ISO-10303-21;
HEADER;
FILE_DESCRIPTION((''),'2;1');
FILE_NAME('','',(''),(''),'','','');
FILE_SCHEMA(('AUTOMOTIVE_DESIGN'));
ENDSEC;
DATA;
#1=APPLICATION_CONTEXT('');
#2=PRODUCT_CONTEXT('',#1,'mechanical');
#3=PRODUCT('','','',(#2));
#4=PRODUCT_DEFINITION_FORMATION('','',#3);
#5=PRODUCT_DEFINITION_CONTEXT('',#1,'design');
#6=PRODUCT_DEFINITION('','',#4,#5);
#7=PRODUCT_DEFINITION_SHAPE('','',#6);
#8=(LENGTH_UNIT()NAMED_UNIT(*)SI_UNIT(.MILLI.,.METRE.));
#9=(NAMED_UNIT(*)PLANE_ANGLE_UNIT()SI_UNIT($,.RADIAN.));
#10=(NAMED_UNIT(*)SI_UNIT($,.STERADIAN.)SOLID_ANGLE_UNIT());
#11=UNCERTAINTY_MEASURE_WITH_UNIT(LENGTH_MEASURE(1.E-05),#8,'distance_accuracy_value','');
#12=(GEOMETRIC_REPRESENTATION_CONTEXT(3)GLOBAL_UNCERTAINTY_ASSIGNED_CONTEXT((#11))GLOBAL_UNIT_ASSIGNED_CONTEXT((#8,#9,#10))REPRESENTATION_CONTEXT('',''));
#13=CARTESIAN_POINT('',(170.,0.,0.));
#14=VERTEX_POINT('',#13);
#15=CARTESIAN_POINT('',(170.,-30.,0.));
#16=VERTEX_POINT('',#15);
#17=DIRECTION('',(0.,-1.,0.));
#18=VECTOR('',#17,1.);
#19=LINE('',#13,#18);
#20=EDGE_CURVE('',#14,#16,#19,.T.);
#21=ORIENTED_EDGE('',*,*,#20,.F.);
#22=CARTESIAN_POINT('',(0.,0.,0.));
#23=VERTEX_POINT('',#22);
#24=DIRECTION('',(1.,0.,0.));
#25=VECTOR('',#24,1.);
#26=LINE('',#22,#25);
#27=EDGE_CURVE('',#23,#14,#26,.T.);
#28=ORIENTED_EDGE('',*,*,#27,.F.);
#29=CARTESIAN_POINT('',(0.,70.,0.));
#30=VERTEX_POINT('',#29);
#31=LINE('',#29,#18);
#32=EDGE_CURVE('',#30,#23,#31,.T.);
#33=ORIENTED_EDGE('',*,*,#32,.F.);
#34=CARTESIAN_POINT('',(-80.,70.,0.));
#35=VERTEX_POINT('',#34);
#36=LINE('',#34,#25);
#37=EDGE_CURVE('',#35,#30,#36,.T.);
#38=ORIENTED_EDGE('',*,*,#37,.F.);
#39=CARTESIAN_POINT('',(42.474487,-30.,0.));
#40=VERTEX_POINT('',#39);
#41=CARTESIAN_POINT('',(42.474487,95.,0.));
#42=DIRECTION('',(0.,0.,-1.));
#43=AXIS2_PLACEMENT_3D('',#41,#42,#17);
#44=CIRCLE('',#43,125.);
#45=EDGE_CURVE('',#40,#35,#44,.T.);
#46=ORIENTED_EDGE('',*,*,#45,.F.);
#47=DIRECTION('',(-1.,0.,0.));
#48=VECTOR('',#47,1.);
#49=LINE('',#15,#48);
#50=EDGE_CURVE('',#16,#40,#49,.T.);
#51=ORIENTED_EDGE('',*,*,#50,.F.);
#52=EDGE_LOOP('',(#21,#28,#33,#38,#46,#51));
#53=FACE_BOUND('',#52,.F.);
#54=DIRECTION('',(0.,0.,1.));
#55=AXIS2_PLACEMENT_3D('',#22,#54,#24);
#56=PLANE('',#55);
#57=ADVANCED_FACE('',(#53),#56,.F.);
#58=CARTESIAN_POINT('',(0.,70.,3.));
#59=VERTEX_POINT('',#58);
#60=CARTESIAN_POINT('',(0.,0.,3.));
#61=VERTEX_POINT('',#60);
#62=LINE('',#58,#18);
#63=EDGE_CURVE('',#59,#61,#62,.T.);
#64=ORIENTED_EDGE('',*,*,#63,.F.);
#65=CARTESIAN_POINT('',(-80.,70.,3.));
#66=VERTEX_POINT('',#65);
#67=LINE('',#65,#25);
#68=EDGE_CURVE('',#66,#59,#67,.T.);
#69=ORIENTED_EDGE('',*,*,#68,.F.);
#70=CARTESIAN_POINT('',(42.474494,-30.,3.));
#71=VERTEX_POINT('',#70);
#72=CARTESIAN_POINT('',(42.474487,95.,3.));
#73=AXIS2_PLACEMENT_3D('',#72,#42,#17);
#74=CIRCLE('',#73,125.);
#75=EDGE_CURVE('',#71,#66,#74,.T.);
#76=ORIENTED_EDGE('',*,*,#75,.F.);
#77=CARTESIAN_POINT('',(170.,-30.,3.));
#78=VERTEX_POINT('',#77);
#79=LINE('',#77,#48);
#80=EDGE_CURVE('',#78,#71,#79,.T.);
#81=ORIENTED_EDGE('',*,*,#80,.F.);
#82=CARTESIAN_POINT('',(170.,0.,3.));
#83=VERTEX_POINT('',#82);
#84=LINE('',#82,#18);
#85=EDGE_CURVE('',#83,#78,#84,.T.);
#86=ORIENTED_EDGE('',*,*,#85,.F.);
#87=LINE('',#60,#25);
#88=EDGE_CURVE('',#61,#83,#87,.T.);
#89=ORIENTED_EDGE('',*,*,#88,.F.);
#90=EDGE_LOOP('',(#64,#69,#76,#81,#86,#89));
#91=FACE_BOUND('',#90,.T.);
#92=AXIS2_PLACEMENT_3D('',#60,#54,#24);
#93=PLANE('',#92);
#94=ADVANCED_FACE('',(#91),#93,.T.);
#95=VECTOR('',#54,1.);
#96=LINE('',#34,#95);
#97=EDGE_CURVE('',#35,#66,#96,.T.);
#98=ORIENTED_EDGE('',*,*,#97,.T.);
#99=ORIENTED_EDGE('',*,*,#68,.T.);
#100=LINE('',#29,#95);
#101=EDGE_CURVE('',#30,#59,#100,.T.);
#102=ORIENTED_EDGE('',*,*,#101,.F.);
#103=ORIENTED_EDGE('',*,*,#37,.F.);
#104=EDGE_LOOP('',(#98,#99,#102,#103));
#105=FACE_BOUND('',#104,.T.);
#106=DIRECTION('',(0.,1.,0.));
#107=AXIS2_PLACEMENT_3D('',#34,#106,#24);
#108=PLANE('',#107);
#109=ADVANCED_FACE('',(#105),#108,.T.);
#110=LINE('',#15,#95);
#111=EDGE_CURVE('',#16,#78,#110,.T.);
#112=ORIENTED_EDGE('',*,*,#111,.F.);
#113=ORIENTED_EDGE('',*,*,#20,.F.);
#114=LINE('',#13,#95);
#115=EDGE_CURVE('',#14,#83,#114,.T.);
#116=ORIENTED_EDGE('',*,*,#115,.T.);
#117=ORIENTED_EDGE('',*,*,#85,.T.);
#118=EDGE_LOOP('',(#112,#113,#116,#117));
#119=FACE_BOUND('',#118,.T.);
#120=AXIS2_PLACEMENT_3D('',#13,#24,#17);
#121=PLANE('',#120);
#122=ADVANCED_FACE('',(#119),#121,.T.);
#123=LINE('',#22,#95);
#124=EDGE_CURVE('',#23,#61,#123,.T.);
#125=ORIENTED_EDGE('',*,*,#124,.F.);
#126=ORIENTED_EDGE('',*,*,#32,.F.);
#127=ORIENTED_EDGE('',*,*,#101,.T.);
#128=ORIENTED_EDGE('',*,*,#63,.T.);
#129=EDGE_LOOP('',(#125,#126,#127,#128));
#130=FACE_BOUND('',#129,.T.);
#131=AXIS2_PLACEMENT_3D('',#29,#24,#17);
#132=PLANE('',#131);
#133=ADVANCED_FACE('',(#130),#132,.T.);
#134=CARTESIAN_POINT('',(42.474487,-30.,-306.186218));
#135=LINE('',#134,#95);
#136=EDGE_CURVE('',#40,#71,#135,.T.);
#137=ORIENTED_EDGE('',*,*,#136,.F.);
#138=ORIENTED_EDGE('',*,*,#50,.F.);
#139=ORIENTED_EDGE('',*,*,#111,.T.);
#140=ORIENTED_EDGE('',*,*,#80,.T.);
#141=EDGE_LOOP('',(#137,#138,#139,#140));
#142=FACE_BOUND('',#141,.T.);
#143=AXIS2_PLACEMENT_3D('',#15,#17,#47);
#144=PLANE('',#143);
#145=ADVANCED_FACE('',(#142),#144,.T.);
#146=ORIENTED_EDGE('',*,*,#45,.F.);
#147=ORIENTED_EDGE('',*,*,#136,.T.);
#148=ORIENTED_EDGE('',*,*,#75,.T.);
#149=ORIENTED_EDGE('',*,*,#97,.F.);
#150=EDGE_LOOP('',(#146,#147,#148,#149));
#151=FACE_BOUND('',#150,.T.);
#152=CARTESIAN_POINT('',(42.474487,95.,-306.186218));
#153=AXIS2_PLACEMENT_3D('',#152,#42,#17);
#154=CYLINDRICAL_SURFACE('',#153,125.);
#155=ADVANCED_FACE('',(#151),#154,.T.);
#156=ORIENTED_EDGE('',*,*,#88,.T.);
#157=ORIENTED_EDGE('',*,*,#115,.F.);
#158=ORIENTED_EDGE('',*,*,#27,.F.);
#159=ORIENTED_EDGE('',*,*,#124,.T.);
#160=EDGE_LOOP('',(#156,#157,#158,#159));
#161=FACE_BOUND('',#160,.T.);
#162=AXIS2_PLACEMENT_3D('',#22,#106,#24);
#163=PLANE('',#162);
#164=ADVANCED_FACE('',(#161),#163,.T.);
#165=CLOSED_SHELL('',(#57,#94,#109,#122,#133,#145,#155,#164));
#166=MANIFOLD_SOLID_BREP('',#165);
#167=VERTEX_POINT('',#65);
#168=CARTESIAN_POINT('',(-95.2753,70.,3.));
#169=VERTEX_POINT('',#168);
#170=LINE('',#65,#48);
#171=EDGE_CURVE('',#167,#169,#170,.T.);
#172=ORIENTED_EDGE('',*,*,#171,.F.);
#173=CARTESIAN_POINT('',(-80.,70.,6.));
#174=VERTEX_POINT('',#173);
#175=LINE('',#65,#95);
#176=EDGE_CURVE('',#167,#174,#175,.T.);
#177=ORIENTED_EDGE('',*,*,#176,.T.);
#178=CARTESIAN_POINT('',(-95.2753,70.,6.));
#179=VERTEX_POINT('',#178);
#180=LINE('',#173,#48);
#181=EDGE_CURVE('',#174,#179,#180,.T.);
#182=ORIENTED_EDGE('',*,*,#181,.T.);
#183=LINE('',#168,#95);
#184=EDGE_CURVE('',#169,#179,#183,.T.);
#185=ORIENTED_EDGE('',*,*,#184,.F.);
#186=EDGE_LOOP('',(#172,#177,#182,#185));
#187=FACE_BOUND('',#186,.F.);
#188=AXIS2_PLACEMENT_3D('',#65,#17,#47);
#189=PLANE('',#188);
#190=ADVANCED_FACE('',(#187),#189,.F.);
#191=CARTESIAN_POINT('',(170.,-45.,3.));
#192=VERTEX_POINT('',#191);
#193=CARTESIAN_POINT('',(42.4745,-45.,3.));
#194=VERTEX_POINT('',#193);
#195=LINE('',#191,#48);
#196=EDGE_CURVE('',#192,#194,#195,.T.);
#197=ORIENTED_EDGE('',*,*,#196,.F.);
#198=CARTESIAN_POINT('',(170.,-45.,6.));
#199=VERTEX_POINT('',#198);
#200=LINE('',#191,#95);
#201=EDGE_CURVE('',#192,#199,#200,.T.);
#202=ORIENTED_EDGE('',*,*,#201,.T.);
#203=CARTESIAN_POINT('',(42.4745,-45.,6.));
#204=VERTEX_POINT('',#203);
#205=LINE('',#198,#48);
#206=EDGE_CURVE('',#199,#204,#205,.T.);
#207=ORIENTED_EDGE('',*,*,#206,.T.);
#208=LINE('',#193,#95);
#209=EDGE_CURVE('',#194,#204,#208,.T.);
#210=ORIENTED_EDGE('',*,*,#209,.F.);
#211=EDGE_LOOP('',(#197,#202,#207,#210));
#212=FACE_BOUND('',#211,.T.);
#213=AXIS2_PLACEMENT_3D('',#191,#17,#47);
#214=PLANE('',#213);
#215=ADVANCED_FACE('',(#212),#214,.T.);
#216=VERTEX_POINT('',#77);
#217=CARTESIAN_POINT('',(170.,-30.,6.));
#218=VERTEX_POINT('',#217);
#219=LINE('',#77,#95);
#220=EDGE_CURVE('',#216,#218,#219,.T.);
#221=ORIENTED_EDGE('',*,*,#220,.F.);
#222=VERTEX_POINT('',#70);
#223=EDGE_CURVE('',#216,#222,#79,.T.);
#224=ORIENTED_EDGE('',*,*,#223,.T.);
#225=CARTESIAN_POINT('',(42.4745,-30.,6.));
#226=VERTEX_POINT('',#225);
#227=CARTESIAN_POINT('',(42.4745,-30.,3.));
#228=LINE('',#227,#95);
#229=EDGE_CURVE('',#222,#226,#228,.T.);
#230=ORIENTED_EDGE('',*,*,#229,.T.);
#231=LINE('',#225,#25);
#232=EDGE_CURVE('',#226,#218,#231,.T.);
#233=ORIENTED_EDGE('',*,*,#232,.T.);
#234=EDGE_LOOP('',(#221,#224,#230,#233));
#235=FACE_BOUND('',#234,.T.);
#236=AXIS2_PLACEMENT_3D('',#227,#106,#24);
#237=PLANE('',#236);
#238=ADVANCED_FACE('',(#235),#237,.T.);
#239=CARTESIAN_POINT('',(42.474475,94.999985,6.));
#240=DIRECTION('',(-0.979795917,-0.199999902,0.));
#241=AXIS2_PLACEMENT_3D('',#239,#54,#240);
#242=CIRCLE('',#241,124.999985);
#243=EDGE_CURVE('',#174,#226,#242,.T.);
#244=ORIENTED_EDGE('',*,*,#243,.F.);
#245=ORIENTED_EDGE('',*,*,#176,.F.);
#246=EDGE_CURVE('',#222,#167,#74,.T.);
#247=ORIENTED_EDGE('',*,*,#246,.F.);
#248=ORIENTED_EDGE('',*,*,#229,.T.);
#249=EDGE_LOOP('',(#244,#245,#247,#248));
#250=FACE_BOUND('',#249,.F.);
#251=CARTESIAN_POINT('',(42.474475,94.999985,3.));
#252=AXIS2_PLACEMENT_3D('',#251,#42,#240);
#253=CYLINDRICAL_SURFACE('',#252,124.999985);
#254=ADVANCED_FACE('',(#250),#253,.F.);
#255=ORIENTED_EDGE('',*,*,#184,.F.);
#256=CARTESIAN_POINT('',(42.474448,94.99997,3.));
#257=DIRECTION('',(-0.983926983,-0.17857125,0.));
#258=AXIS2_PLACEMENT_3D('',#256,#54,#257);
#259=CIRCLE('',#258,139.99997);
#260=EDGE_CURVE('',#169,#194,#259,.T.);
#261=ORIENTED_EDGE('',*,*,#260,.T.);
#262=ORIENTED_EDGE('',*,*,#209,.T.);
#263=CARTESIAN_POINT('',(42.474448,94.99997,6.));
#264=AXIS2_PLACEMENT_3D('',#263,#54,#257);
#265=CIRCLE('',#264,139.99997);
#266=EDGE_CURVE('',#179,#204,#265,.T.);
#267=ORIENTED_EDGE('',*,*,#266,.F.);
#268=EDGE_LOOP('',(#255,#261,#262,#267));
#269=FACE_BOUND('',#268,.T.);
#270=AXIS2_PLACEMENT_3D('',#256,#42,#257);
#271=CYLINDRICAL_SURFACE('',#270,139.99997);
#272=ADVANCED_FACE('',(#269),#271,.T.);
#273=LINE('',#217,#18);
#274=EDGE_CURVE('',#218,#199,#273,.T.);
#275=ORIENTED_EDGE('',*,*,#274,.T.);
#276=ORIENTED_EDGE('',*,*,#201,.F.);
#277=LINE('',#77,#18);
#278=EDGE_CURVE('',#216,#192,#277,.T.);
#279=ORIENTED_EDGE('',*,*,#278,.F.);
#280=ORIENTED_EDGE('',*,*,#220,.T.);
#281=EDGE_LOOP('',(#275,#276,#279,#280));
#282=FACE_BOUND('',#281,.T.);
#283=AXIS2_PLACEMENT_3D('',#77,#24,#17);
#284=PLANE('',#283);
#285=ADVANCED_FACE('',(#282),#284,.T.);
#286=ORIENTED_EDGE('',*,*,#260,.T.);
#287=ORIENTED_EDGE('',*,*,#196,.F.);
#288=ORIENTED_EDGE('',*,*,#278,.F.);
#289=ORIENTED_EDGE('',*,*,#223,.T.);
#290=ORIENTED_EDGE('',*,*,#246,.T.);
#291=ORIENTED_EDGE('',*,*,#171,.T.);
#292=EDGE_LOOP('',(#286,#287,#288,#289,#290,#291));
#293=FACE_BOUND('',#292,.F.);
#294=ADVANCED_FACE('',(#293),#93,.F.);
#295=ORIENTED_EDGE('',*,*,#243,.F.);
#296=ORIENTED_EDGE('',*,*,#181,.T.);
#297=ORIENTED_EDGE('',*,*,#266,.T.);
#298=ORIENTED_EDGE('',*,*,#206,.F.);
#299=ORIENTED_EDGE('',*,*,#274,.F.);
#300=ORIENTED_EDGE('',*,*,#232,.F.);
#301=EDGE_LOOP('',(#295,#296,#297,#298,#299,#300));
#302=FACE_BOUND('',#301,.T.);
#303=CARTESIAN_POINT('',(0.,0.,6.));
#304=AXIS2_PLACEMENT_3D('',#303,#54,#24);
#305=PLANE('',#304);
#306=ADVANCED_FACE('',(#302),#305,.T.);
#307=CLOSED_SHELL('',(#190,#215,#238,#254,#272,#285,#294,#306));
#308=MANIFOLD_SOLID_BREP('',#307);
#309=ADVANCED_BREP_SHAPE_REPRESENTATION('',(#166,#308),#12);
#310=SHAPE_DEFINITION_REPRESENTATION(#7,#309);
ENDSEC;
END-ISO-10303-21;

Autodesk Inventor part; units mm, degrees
ref_plane "YZ Plane" through (0, 0, 0) normal (1, 0, 0) x (0, 1, 0)
ref_plane "XZ Plane" through (0, 0, 0) normal (0, 1, 0) x (-1, 0, 0)
ref_plane "XY Plane" through (0, 0, 0) normal (0, 0, 1) x (1, 0, 0)
sketch "Sketch2" plane through (0, 0, 0) normal (0, 0, 1) x (1, 0, 0)
  line L0 (0, 0) -> (170, 0)
  line L1 (0, 70) -> (0, 0)
  line L2 (170, 0) -> (170, -30)
  line L3 (170, -30) -> (-80, -30)
  line L4 (-80, 70) -> (0, 70)
  line L5 (-80, 70) -> (-80, -30)
  dimension "d2" = 30
  dimension "d5" = 70
  dimension "d9" = 80
  dimension "d10" = 250
extrude "Extrusion1" add sketch "Sketch2" along normal blind 3
fillet "Fillet1" radius 125 1 edges at (-80, -30, 1.5)
sketch "Sketch3" plane through (0, 0, 3) normal (0, 0, 1) x (1, 0, 0)
  arc A0 (-80, 70) -> (42.4745, -30) centre (42.4745, 95) ccw projected
  arc A1 (-95.2753, 70) -> (42.4745, -45) centre (42.4745, 95) ccw
  line L0 (170, -30) -> (170, -45)
  line L1 (-80, 70) -> (-95.2753, 70)
  line L2 (0, 70) -> (-80, 70) projected
  line L3 (170, -45) -> (42.4745, -45)
  line L4 (42.4745, -30) -> (170, -30) projected
  arc A2 (-80, 70) -> (42.4745, -30) centre (42.4745, 95) ccw
  line L5 (170, -30) -> (42.4745, -30)
  line L6 (170, -30) -> (170, 0) projected
  point P0 (0, 0)
  dimension "d12" = 280
extrude "Extrusion2" add sketch "Sketch3" along normal blind 3
properties part number "Arm-X25-Left-Back"
